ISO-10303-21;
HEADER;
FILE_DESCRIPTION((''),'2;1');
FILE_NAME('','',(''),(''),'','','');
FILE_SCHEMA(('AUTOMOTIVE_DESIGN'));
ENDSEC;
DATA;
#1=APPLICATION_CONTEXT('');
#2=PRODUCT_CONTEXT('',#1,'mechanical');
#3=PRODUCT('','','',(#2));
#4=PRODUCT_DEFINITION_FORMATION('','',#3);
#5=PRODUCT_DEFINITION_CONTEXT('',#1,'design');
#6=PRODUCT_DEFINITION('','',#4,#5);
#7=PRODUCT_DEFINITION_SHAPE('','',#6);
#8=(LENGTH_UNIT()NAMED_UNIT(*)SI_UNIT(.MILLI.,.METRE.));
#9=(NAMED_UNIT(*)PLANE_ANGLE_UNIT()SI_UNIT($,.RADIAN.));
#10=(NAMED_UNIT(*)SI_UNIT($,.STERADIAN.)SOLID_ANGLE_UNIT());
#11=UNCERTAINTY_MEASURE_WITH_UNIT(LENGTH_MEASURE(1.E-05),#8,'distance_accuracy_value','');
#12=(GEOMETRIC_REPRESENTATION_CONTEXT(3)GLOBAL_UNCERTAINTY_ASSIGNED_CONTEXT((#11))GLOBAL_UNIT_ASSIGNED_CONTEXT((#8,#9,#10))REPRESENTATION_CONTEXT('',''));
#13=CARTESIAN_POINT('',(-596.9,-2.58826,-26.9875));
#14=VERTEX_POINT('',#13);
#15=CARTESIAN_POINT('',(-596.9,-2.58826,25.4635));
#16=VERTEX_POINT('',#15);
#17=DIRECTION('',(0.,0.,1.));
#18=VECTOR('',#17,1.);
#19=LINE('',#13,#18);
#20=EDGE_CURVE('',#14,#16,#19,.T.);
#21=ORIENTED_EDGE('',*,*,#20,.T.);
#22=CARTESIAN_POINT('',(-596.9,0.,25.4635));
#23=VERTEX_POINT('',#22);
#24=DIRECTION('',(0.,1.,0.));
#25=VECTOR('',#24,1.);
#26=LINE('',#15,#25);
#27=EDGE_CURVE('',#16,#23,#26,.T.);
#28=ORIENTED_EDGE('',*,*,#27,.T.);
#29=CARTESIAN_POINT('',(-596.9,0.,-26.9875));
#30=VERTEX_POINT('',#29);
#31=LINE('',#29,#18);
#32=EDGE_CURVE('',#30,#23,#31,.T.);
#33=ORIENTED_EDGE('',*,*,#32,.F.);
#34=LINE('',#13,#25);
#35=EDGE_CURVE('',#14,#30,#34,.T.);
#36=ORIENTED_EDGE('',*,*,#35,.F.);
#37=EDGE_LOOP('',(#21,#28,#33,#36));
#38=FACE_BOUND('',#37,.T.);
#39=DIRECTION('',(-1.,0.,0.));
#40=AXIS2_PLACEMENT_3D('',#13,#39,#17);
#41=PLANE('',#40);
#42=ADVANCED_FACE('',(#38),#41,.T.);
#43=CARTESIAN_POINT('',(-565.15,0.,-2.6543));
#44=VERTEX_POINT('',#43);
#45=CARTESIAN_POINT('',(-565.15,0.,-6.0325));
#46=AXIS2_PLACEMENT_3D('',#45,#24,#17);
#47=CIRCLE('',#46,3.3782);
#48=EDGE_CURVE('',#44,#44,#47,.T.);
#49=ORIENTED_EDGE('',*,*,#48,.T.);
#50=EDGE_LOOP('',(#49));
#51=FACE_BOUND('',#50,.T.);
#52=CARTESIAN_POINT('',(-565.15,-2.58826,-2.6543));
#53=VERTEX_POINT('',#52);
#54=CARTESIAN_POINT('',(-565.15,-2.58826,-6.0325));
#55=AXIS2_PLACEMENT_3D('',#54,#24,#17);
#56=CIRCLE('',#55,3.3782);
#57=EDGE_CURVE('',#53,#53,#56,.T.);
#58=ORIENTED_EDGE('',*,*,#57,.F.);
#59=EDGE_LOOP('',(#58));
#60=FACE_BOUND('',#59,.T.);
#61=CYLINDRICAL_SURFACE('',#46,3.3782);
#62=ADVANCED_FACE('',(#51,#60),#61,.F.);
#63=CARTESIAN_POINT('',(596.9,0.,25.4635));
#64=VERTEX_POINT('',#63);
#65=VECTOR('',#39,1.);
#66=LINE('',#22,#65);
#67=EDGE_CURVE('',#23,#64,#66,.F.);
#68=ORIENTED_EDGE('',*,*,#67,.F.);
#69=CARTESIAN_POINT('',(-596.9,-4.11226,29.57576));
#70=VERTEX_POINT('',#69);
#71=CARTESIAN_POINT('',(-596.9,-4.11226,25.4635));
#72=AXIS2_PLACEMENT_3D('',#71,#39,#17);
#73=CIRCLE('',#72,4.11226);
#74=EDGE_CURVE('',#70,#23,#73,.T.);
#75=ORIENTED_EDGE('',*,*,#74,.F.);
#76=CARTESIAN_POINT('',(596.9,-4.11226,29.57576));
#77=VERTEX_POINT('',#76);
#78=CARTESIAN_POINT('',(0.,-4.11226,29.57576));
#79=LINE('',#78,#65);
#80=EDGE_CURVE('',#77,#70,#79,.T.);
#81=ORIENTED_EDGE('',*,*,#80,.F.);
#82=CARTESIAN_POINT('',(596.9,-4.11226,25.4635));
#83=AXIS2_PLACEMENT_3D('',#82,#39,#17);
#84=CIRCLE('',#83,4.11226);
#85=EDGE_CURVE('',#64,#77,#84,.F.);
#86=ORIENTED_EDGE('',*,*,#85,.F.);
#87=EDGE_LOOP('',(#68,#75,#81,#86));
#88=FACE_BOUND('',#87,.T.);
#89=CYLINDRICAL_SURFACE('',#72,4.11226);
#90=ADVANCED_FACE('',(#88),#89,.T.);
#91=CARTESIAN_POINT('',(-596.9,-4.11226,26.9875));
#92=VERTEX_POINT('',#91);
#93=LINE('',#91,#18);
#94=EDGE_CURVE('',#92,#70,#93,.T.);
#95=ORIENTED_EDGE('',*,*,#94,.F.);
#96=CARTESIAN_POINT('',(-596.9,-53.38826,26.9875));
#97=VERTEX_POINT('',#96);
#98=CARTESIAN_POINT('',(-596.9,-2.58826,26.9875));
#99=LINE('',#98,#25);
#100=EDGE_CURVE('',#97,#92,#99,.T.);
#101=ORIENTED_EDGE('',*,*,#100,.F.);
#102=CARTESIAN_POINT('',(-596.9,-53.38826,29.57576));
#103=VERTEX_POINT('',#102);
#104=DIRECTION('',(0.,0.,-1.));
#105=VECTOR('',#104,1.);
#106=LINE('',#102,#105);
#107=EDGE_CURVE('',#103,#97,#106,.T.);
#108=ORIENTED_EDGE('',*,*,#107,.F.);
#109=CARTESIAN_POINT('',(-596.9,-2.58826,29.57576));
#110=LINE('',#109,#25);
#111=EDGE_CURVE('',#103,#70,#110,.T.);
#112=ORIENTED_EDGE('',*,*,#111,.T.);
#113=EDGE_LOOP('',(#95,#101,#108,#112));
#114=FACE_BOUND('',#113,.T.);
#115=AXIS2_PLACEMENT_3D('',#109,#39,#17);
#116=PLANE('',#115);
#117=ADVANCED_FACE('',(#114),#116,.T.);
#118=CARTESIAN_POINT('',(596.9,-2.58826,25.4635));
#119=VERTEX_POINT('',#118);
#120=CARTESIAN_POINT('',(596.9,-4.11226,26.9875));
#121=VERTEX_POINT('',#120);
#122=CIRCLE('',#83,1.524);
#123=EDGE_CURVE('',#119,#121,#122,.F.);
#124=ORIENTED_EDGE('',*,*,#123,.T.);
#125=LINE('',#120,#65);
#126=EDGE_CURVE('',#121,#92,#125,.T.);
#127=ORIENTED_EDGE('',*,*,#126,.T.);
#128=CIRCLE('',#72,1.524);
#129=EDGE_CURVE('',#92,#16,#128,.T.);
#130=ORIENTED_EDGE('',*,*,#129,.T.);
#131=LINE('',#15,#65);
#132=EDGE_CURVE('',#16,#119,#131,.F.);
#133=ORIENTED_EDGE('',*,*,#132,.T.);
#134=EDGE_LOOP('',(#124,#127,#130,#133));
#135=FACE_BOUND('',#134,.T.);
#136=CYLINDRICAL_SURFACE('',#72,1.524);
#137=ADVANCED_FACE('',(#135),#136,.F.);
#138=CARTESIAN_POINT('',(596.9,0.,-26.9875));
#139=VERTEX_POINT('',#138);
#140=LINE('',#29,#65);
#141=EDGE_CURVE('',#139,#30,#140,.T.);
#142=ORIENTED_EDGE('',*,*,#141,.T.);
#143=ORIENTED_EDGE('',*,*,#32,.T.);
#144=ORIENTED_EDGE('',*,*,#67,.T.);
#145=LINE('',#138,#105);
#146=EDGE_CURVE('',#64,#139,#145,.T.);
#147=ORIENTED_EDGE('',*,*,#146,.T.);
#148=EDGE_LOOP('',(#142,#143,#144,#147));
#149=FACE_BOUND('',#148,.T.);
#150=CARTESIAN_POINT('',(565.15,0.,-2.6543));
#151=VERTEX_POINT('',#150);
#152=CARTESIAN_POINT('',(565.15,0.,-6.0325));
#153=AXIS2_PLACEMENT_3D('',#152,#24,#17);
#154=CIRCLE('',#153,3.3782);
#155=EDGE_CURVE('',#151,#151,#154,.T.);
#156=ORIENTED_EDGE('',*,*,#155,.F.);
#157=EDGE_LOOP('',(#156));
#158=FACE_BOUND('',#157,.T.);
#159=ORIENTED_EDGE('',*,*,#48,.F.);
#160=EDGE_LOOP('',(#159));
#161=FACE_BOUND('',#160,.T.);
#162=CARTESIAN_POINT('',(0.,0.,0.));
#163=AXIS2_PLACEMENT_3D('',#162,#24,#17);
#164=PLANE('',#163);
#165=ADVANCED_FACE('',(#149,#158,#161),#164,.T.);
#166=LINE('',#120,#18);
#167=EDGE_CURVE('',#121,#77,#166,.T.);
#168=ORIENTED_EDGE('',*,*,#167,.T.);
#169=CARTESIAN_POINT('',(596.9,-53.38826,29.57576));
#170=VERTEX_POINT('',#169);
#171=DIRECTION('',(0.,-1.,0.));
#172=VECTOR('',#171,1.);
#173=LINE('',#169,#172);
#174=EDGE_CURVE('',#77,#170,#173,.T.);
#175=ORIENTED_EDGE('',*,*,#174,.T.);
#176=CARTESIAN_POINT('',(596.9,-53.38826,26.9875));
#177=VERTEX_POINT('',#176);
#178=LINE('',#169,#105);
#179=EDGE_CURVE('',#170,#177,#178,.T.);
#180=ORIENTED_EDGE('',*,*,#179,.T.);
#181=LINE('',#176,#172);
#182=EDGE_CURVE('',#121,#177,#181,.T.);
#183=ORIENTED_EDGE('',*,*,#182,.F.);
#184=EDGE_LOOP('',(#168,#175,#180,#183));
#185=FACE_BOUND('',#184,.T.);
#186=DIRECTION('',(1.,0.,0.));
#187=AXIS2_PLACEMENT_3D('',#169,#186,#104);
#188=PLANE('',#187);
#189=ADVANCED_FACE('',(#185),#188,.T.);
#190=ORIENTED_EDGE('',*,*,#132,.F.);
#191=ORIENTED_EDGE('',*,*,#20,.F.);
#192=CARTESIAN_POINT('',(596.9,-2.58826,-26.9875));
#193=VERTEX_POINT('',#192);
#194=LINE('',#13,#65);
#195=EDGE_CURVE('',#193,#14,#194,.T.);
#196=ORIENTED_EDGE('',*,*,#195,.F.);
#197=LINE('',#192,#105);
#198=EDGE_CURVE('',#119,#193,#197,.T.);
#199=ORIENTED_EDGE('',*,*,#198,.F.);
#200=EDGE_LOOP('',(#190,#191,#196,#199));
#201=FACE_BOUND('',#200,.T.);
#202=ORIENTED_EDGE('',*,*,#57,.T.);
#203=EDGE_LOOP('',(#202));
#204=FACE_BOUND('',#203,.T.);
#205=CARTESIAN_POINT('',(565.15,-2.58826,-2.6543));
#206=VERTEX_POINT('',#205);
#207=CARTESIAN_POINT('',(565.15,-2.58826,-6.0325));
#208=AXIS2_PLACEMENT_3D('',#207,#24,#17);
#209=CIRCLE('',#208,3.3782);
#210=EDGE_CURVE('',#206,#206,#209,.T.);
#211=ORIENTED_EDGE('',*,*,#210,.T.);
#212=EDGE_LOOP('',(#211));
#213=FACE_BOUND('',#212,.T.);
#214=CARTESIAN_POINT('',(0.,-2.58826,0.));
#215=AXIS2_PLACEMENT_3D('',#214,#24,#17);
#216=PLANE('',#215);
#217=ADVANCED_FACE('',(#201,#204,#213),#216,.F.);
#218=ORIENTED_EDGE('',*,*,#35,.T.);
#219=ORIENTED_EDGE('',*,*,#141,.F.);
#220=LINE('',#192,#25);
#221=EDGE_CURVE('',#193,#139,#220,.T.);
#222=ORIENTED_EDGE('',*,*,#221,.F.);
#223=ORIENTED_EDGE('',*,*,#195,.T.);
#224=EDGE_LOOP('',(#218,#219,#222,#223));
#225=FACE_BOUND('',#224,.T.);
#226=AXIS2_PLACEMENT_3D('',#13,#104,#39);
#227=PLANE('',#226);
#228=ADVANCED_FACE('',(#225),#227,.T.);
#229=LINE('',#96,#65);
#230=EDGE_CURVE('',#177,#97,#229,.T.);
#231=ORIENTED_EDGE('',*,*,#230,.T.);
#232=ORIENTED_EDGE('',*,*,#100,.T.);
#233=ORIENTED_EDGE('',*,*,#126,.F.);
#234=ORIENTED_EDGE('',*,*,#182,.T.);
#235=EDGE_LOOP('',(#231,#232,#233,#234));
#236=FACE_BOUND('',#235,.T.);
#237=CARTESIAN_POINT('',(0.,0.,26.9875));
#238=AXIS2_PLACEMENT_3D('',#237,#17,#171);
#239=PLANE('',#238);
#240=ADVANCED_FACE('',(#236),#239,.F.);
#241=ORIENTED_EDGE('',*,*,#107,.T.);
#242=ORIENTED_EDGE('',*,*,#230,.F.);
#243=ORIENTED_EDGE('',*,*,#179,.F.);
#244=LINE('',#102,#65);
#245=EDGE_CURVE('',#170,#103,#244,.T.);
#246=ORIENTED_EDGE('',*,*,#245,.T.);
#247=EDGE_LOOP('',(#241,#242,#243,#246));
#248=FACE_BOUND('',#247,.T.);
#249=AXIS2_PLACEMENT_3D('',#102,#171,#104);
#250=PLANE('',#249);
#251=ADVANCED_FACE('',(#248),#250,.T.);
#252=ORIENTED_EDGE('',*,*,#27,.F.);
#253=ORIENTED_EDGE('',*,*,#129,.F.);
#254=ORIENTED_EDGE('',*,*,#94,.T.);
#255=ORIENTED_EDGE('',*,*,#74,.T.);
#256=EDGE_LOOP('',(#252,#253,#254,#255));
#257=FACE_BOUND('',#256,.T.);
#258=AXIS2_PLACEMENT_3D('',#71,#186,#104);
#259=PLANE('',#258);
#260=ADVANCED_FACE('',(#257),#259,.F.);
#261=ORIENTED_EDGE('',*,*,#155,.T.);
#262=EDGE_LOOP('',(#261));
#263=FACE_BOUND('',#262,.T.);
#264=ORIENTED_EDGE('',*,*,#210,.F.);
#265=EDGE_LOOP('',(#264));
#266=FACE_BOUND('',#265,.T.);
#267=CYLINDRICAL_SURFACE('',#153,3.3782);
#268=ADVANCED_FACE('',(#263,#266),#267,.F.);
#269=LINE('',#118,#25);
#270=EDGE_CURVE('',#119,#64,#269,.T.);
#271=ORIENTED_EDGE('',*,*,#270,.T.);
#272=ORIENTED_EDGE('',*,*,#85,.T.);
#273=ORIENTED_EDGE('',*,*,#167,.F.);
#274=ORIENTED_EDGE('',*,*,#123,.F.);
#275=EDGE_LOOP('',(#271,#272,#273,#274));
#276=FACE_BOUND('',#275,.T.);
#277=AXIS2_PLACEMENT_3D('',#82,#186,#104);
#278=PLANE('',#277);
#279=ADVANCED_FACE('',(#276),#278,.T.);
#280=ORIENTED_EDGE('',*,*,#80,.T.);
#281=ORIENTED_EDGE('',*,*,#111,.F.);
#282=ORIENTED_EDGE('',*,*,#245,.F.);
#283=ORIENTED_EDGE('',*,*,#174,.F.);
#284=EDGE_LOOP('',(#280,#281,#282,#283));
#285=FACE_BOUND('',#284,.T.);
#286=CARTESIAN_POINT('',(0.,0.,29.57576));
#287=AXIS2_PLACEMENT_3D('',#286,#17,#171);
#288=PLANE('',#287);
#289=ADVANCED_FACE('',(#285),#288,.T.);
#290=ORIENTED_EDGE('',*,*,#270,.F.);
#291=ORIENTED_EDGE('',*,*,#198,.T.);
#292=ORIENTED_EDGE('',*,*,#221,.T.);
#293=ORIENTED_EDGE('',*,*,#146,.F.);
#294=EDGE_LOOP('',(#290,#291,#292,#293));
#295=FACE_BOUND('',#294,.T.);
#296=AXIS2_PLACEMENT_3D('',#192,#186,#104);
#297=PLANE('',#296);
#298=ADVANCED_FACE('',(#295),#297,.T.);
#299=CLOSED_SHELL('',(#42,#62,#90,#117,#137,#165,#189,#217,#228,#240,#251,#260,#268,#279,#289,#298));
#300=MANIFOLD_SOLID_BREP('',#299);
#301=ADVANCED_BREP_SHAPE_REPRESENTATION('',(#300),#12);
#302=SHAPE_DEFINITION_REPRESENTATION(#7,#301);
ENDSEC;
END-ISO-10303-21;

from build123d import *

# Parameters (mm, degrees)
SKETCH1_W                    = 1193.8
SKETCH1_H                    = 53.975
BASE_FLANGE1_DEPTH           = 2.58826
EDGE_FLANGE1_STRIP_W         = 13.40104
EDGE_FLANGE1_STRIP_H         = 2.58826
EDGE_FLANGE1_STRIP_CUT_DEPTH = 1193.8
EDGE_FLANGE1_DEPTH           = 1193.8
F_1_4_CLEARANCE_HOLE1_D      = 6.7564


# Sheet-metal steps are written as plain solids
with BuildPart() as part:
    # Sketch1 → Base-Flange1 (new body)
    with BuildSketch(Plane(origin=(0, 0, 0), x_dir=(1, 0, 0), z_dir=(0, 1, 0))):
        Rectangle(SKETCH1_W, SKETCH1_H)
    extrude(amount=-BASE_FLANGE1_DEPTH)

    # Edge-Flange1 strip (across the edge) → Edge-Flange1 strip cut (cut)
    with BuildSketch(Plane(origin=(596.9, -2.58826, 26.9875), x_dir=(0, 0, -1), z_dir=(-1, 0, 0))):
        with Locations((-5.17652, -1.29413)):
            Rectangle(EDGE_FLANGE1_STRIP_W, EDGE_FLANGE1_STRIP_H)
    extrude(amount=EDGE_FLANGE1_STRIP_CUT_DEPTH, mode=Mode.SUBTRACT)

    # Edge-Flange1 section (across the edge) → Edge-Flange1 (add)
    with BuildSketch(Plane(origin=(596.9, -2.58826, 26.9875), x_dir=(0, 0, -1), z_dir=(-1, 0, 0))):
        with BuildLine():
            Line((-2.58826, 1.524), (-2.58826, 50.8))
            Line((-2.58826, 50.8), (0, 50.8))
            Line((0, 50.8), (0, 1.524))
            ThreePointArc((0, 1.524), (0.446369265, 0.446369265), (1.524, 0))
            Line((1.524, 0), (1.524, -2.58826))
            ThreePointArc((1.524, -2.58826), (-1.383806932, -1.383806932), (-2.58826, 1.524))
        make_face()
    extrude(amount=EDGE_FLANGE1_DEPTH)

    # 1/4 Clearance Hole1 (through all)
    with Locations(Plane(origin=(0, 0, 0), x_dir=(1, 0, 0), z_dir=(0, 1, 0))):
        with Locations((565.15, 6.0325), (-565.15, 6.0325)):
            Hole(F_1_4_CLEARANCE_HOLE1_D / 2)


solid = part.part
